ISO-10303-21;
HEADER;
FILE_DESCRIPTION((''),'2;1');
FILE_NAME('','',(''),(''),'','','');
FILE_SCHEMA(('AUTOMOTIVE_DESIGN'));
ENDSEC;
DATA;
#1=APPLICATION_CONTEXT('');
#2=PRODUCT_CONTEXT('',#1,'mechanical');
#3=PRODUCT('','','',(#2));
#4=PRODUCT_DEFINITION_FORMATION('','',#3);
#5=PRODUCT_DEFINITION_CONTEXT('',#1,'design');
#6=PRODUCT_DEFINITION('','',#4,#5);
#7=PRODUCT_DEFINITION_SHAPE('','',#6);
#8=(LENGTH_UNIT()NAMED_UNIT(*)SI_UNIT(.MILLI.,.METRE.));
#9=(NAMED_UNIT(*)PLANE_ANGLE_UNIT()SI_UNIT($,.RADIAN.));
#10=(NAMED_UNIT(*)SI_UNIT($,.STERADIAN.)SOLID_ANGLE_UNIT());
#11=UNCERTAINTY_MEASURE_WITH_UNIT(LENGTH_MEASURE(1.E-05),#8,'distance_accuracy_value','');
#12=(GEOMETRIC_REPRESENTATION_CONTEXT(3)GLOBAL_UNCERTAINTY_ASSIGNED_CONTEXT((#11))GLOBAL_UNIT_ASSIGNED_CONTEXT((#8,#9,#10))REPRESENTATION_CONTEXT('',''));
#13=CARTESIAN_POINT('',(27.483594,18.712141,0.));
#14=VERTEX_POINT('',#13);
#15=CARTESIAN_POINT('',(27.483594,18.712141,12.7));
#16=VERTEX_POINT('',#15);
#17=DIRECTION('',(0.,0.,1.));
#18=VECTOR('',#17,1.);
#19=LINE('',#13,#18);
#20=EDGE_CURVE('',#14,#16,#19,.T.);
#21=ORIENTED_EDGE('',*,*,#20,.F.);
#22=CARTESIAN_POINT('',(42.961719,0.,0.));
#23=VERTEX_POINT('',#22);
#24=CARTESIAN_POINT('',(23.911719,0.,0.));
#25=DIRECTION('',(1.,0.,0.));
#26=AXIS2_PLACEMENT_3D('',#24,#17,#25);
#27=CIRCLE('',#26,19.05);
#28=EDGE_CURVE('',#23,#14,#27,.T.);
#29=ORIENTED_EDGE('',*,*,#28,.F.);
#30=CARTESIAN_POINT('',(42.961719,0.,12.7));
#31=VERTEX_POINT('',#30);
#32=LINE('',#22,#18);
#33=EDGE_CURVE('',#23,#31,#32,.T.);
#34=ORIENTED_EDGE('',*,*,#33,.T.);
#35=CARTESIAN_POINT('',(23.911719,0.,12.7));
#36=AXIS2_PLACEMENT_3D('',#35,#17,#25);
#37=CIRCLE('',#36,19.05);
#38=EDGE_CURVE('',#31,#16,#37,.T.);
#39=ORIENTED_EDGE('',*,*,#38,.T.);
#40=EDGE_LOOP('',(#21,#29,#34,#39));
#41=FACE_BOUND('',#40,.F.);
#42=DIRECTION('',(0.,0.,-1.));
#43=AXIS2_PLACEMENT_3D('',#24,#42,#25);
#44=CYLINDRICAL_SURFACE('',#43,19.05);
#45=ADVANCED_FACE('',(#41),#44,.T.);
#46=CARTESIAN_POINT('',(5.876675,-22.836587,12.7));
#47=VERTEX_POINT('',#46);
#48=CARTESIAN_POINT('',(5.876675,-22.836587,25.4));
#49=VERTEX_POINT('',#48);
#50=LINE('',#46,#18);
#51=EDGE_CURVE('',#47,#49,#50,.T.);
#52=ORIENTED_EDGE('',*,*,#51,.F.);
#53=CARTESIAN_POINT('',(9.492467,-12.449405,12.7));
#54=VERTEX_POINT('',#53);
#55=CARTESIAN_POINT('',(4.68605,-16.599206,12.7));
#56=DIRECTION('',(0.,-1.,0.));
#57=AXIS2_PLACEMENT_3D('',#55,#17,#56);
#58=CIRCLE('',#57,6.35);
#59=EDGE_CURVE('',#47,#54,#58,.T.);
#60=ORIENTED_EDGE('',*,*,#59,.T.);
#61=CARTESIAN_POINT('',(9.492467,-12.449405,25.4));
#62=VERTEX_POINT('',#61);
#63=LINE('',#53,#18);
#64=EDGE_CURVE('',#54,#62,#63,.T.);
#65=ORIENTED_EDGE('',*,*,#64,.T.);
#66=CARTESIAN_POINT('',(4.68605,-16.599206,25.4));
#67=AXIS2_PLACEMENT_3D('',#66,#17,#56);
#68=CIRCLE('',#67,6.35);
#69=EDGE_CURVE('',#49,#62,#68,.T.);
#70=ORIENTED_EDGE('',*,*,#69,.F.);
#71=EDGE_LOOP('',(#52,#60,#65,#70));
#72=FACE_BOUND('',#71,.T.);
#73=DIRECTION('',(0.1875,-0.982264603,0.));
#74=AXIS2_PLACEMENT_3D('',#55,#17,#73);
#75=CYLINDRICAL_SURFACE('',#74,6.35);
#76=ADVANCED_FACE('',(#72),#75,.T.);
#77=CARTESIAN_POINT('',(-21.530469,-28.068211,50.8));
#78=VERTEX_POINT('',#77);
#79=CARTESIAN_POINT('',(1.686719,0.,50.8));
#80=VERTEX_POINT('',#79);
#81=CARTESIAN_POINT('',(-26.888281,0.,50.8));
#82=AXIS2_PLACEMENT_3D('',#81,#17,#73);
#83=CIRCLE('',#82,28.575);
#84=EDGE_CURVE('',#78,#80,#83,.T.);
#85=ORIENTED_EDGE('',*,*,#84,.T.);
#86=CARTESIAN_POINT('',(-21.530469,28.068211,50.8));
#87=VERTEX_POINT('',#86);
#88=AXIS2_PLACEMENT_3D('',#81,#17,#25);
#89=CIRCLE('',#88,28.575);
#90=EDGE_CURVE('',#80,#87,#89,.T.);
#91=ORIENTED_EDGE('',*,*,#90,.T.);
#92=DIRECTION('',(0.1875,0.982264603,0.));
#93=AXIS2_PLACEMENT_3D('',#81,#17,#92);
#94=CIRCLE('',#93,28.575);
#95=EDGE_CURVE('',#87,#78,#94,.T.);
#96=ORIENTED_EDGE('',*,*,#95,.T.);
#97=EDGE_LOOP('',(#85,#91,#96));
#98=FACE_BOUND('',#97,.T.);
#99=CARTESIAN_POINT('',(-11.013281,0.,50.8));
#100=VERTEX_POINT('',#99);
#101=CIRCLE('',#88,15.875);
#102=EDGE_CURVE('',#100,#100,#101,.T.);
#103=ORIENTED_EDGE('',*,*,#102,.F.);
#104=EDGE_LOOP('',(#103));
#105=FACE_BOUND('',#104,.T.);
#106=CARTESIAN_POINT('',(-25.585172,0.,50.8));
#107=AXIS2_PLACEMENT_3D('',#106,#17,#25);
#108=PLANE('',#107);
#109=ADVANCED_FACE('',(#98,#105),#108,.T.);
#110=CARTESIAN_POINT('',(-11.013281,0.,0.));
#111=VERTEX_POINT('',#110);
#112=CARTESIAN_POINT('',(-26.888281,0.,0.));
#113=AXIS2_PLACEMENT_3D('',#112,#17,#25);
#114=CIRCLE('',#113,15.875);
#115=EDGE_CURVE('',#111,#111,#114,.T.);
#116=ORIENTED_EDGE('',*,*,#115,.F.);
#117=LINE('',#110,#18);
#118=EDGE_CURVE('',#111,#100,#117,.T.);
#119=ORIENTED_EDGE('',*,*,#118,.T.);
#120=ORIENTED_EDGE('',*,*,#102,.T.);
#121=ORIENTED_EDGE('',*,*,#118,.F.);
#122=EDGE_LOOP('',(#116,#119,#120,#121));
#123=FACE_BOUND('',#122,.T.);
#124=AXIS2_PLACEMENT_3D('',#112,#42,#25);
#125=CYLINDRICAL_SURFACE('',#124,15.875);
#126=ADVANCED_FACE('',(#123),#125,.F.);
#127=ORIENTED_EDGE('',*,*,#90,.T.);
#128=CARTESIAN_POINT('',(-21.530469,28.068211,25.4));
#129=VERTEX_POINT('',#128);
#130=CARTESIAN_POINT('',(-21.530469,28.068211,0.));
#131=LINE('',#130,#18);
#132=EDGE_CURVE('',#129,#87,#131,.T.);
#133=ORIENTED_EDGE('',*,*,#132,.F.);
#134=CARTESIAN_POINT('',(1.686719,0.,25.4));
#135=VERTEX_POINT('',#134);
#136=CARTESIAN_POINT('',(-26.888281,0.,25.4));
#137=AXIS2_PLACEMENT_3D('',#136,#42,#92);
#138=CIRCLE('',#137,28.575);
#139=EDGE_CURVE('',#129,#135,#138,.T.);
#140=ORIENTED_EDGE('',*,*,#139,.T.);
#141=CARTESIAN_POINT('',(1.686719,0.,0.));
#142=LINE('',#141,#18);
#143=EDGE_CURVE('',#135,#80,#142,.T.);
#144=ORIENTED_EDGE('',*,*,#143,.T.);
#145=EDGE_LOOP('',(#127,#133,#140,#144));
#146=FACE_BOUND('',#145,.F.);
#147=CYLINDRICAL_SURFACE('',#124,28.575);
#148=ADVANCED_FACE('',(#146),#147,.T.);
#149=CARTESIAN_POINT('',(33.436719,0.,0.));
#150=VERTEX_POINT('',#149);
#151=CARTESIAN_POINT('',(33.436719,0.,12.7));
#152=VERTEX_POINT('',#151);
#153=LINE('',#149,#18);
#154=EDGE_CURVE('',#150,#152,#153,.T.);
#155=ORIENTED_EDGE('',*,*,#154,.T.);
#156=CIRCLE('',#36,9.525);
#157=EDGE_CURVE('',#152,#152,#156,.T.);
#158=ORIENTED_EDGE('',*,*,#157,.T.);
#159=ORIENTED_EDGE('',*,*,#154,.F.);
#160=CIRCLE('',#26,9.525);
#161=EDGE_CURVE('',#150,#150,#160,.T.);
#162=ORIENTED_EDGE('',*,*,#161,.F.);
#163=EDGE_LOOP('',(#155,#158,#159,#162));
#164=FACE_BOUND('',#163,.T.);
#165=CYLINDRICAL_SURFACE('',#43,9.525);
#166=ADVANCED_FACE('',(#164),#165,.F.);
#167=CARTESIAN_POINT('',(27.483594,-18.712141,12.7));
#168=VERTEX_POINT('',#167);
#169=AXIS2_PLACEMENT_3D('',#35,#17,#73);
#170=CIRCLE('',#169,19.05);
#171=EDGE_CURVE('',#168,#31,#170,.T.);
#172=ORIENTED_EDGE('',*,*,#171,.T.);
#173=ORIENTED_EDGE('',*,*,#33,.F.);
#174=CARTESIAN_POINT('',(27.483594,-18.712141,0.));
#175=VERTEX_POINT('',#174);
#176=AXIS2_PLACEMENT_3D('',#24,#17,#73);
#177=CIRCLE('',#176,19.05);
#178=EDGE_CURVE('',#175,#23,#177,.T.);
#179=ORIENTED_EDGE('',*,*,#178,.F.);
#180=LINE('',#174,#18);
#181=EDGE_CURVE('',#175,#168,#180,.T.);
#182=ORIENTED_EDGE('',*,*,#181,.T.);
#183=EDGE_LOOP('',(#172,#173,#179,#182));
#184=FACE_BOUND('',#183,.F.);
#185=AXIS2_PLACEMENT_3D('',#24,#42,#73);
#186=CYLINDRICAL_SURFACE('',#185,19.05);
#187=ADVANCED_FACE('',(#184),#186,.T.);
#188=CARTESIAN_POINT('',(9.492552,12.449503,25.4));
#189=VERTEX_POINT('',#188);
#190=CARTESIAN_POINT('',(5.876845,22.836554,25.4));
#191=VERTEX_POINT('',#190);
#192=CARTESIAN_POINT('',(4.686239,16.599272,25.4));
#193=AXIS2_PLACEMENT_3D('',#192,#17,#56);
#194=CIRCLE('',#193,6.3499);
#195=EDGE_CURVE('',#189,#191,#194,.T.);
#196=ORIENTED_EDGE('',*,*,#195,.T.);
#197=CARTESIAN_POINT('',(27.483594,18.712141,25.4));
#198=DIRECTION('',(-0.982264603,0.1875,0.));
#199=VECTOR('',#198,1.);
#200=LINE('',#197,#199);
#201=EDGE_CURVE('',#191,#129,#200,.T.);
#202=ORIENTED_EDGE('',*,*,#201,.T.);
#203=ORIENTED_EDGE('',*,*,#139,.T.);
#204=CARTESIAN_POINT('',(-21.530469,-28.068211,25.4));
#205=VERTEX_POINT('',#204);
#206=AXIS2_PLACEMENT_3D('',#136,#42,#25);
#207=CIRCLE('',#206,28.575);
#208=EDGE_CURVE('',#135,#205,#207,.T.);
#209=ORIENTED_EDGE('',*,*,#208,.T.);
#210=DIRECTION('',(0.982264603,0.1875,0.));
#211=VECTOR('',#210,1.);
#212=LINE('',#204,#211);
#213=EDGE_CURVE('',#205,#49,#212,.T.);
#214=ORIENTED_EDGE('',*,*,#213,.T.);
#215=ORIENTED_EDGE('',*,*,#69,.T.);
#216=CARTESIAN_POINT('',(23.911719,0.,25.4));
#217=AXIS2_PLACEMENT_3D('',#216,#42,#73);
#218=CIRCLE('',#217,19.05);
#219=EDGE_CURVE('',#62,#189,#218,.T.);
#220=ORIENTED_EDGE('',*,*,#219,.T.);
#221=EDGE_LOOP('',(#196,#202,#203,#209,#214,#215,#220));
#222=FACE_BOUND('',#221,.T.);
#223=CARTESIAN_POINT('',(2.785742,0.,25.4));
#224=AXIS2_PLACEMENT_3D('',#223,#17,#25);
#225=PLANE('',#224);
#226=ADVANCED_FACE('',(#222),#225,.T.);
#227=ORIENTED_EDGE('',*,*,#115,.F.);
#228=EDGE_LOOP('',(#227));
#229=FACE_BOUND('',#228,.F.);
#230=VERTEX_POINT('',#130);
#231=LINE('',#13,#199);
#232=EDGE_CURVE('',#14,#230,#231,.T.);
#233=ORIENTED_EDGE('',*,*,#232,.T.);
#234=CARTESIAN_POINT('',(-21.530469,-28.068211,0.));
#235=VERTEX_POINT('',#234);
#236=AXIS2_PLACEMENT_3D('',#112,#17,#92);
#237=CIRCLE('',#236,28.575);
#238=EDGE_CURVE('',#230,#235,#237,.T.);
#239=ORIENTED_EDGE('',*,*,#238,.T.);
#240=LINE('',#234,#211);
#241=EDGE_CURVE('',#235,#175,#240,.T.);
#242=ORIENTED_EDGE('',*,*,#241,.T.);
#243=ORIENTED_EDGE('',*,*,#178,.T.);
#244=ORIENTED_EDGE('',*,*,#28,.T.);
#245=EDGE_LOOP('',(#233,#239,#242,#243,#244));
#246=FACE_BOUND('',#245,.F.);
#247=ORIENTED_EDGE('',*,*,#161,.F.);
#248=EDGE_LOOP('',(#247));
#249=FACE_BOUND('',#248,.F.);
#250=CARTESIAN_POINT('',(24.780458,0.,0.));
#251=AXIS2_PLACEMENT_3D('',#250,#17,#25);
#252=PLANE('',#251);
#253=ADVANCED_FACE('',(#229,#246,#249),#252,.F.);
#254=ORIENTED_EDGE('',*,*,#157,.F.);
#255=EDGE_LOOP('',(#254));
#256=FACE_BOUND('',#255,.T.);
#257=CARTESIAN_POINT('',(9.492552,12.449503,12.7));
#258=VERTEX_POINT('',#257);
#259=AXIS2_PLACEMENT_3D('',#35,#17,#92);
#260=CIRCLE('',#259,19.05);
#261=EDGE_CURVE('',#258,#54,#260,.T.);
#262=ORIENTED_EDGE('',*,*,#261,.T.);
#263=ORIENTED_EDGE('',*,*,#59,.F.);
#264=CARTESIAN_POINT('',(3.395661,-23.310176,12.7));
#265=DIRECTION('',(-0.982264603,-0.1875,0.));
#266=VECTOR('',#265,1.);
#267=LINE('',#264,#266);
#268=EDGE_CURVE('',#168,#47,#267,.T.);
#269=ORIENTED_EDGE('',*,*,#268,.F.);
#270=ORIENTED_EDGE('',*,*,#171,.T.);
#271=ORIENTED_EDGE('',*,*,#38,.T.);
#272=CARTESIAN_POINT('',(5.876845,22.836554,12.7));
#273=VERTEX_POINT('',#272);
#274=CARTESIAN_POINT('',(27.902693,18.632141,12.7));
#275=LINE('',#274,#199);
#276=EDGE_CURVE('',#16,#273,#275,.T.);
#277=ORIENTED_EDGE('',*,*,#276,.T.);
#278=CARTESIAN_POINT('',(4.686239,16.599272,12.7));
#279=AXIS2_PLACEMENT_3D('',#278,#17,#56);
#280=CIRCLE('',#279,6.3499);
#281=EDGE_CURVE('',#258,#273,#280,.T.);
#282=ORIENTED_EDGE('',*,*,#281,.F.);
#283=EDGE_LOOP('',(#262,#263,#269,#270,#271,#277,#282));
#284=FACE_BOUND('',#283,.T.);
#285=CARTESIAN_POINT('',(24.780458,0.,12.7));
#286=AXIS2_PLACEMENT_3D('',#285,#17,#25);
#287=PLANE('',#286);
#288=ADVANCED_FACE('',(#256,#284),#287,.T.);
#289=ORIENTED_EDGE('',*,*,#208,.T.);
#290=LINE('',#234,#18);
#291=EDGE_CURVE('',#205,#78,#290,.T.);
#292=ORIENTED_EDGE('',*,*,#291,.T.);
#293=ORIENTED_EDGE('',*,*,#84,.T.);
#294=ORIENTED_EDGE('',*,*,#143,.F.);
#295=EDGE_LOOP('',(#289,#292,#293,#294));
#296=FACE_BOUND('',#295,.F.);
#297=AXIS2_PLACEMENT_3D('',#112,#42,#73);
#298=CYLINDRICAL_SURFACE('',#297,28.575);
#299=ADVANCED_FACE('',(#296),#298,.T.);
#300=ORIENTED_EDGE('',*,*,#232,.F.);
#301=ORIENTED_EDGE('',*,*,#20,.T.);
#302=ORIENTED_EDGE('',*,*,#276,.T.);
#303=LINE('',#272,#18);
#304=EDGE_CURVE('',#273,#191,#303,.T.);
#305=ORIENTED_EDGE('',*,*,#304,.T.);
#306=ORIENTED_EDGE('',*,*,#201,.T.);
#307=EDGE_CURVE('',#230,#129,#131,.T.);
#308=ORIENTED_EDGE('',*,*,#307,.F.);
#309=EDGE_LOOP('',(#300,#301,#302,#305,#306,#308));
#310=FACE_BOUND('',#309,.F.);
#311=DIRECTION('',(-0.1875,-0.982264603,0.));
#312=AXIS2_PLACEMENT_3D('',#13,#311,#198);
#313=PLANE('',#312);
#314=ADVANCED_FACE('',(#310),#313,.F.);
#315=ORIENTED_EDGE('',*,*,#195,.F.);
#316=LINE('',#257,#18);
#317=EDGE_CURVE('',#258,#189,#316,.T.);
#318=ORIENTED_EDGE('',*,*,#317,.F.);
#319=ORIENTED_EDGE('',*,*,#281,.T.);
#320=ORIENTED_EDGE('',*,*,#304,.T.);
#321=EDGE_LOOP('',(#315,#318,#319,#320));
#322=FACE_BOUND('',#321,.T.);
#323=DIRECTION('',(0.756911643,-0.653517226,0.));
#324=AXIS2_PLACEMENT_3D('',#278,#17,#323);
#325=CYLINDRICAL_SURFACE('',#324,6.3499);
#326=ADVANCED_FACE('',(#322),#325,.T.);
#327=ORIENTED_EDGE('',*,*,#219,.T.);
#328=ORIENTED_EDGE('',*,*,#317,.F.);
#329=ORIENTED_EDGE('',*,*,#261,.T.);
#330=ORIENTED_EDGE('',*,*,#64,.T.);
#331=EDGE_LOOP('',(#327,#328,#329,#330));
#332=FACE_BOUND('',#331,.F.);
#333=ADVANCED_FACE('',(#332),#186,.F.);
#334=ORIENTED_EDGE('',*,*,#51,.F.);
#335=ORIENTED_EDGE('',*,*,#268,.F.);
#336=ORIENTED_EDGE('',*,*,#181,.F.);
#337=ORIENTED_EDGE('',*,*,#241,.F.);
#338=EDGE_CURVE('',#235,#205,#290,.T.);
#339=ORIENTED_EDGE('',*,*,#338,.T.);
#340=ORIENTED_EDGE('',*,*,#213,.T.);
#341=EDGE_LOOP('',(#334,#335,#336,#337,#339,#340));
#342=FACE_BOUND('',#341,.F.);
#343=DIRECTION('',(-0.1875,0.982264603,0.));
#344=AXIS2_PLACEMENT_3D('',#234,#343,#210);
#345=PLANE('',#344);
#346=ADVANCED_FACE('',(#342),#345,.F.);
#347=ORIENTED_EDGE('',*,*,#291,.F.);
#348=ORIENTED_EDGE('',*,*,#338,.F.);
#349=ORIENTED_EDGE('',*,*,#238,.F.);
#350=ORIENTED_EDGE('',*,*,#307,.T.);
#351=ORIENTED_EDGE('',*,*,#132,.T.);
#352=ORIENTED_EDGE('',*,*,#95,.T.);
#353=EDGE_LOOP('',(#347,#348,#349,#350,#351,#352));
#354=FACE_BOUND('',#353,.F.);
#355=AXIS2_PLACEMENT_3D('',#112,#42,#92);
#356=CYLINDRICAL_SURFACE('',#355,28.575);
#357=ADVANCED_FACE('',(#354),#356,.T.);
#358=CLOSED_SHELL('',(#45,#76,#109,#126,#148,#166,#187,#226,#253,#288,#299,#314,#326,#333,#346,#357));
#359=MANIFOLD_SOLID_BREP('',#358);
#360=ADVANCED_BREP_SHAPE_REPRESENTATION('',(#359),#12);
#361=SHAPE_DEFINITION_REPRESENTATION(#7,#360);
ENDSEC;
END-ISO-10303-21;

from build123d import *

# Parameters (mm, degrees)
F0_R     = 15.875
F1_DEPTH = 50.8
F2_DEPTH = 25.4
F0_R_2   = 9.525
F3_DEPTH = 12.7
F4_R     = 6.35
F4_R_2   = 6.3499


# Not quite as in the source:
# - a fillet or chamfer is up to 0.001 mm smaller than in the source, because OpenCascade refuses the exact size


with BuildPart() as f1:
    # F0 (on Top) → F1 (new body)
    with BuildSketch(Plane.XY):
        with BuildLine():
            ThreePointArc((-21.53046875, -28.0682110263), (-4.8697649831, -18.2130603251), (1.68671875, 0))
            ThreePointArc((1.68671875, 0), (-4.8697649831, 18.2130603251), (-21.53046875, 28.0682110263))
            ThreePointArc((-21.53046875, 28.0682110263), (-55.46328125, 0), (-21.53046875, -28.0682110263))
        make_face()
        with Locations((-26.88828125, 0)):
            Circle(F0_R, mode=Mode.SUBTRACT)
    extrude(amount=F1_DEPTH)

    # F0 (on Top) → F2 (join)
    with BuildSketch(Plane.XY):
        with BuildLine():
            ThreePointArc((-21.53046875, 28.0682110263), (-4.8697649831, 18.2130603251), (1.68671875, 0))
            ThreePointArc((1.68671875, 0), (-4.8697649831, -18.2130603251), (-21.53046875, -28.0682110263))
            Line((-21.53046875, -28.0682110263), (27.48359375, -18.7121406842))
            ThreePointArc((27.48359375, -18.7121406842), (4.86171875, 0), (27.48359375, 18.7121406842))
            Line((27.48359375, 18.7121406842), (-21.53046875, 28.0682110263))
        make_face()
    extrude(amount=F2_DEPTH)

    # F0 (on Top) → F3 (join)
    with BuildSketch(Plane.XY):
        with BuildLine():
            ThreePointArc((42.96171875, 0), (38.5907295946, 12.1420402167), (27.48359375, 18.7121406842))
            ThreePointArc((27.48359375, 18.7121406842), (4.86171875, 0), (27.48359375, -18.7121406842))
            ThreePointArc((27.48359375, -18.7121406842), (38.5907295946, -12.1420402167), (42.96171875, 0))
        make_face()
        with Locations((23.91171875, 0)):
            Circle(F0_R_2, mode=Mode.SUBTRACT)
    extrude(amount=F3_DEPTH)

    # F4 (call 1 of 2: OpenCascade refuses the feature's edges together)
    f4_edges = [f1.edges().sort_by_distance(p)[0] for p in [
        (27.483594, -18.712141, 6.35),
        (27.483594, -18.712141, 19.05),
    ]]
    fillet(f4_edges, radius=F4_R)

    # F4#2 (call 2 of 2) (radius 6.35 in the source; OpenCascade refuses exactly that, so slightly less here)
    f4_2_edges = [f1.edges().sort_by_distance(p)[0] for p in [
        (27.483594, 18.712141, 6.35),
        (27.483594, 18.712141, 19.05),
    ]]
    fillet(f4_2_edges, radius=F4_R_2)


solid = f1.part
